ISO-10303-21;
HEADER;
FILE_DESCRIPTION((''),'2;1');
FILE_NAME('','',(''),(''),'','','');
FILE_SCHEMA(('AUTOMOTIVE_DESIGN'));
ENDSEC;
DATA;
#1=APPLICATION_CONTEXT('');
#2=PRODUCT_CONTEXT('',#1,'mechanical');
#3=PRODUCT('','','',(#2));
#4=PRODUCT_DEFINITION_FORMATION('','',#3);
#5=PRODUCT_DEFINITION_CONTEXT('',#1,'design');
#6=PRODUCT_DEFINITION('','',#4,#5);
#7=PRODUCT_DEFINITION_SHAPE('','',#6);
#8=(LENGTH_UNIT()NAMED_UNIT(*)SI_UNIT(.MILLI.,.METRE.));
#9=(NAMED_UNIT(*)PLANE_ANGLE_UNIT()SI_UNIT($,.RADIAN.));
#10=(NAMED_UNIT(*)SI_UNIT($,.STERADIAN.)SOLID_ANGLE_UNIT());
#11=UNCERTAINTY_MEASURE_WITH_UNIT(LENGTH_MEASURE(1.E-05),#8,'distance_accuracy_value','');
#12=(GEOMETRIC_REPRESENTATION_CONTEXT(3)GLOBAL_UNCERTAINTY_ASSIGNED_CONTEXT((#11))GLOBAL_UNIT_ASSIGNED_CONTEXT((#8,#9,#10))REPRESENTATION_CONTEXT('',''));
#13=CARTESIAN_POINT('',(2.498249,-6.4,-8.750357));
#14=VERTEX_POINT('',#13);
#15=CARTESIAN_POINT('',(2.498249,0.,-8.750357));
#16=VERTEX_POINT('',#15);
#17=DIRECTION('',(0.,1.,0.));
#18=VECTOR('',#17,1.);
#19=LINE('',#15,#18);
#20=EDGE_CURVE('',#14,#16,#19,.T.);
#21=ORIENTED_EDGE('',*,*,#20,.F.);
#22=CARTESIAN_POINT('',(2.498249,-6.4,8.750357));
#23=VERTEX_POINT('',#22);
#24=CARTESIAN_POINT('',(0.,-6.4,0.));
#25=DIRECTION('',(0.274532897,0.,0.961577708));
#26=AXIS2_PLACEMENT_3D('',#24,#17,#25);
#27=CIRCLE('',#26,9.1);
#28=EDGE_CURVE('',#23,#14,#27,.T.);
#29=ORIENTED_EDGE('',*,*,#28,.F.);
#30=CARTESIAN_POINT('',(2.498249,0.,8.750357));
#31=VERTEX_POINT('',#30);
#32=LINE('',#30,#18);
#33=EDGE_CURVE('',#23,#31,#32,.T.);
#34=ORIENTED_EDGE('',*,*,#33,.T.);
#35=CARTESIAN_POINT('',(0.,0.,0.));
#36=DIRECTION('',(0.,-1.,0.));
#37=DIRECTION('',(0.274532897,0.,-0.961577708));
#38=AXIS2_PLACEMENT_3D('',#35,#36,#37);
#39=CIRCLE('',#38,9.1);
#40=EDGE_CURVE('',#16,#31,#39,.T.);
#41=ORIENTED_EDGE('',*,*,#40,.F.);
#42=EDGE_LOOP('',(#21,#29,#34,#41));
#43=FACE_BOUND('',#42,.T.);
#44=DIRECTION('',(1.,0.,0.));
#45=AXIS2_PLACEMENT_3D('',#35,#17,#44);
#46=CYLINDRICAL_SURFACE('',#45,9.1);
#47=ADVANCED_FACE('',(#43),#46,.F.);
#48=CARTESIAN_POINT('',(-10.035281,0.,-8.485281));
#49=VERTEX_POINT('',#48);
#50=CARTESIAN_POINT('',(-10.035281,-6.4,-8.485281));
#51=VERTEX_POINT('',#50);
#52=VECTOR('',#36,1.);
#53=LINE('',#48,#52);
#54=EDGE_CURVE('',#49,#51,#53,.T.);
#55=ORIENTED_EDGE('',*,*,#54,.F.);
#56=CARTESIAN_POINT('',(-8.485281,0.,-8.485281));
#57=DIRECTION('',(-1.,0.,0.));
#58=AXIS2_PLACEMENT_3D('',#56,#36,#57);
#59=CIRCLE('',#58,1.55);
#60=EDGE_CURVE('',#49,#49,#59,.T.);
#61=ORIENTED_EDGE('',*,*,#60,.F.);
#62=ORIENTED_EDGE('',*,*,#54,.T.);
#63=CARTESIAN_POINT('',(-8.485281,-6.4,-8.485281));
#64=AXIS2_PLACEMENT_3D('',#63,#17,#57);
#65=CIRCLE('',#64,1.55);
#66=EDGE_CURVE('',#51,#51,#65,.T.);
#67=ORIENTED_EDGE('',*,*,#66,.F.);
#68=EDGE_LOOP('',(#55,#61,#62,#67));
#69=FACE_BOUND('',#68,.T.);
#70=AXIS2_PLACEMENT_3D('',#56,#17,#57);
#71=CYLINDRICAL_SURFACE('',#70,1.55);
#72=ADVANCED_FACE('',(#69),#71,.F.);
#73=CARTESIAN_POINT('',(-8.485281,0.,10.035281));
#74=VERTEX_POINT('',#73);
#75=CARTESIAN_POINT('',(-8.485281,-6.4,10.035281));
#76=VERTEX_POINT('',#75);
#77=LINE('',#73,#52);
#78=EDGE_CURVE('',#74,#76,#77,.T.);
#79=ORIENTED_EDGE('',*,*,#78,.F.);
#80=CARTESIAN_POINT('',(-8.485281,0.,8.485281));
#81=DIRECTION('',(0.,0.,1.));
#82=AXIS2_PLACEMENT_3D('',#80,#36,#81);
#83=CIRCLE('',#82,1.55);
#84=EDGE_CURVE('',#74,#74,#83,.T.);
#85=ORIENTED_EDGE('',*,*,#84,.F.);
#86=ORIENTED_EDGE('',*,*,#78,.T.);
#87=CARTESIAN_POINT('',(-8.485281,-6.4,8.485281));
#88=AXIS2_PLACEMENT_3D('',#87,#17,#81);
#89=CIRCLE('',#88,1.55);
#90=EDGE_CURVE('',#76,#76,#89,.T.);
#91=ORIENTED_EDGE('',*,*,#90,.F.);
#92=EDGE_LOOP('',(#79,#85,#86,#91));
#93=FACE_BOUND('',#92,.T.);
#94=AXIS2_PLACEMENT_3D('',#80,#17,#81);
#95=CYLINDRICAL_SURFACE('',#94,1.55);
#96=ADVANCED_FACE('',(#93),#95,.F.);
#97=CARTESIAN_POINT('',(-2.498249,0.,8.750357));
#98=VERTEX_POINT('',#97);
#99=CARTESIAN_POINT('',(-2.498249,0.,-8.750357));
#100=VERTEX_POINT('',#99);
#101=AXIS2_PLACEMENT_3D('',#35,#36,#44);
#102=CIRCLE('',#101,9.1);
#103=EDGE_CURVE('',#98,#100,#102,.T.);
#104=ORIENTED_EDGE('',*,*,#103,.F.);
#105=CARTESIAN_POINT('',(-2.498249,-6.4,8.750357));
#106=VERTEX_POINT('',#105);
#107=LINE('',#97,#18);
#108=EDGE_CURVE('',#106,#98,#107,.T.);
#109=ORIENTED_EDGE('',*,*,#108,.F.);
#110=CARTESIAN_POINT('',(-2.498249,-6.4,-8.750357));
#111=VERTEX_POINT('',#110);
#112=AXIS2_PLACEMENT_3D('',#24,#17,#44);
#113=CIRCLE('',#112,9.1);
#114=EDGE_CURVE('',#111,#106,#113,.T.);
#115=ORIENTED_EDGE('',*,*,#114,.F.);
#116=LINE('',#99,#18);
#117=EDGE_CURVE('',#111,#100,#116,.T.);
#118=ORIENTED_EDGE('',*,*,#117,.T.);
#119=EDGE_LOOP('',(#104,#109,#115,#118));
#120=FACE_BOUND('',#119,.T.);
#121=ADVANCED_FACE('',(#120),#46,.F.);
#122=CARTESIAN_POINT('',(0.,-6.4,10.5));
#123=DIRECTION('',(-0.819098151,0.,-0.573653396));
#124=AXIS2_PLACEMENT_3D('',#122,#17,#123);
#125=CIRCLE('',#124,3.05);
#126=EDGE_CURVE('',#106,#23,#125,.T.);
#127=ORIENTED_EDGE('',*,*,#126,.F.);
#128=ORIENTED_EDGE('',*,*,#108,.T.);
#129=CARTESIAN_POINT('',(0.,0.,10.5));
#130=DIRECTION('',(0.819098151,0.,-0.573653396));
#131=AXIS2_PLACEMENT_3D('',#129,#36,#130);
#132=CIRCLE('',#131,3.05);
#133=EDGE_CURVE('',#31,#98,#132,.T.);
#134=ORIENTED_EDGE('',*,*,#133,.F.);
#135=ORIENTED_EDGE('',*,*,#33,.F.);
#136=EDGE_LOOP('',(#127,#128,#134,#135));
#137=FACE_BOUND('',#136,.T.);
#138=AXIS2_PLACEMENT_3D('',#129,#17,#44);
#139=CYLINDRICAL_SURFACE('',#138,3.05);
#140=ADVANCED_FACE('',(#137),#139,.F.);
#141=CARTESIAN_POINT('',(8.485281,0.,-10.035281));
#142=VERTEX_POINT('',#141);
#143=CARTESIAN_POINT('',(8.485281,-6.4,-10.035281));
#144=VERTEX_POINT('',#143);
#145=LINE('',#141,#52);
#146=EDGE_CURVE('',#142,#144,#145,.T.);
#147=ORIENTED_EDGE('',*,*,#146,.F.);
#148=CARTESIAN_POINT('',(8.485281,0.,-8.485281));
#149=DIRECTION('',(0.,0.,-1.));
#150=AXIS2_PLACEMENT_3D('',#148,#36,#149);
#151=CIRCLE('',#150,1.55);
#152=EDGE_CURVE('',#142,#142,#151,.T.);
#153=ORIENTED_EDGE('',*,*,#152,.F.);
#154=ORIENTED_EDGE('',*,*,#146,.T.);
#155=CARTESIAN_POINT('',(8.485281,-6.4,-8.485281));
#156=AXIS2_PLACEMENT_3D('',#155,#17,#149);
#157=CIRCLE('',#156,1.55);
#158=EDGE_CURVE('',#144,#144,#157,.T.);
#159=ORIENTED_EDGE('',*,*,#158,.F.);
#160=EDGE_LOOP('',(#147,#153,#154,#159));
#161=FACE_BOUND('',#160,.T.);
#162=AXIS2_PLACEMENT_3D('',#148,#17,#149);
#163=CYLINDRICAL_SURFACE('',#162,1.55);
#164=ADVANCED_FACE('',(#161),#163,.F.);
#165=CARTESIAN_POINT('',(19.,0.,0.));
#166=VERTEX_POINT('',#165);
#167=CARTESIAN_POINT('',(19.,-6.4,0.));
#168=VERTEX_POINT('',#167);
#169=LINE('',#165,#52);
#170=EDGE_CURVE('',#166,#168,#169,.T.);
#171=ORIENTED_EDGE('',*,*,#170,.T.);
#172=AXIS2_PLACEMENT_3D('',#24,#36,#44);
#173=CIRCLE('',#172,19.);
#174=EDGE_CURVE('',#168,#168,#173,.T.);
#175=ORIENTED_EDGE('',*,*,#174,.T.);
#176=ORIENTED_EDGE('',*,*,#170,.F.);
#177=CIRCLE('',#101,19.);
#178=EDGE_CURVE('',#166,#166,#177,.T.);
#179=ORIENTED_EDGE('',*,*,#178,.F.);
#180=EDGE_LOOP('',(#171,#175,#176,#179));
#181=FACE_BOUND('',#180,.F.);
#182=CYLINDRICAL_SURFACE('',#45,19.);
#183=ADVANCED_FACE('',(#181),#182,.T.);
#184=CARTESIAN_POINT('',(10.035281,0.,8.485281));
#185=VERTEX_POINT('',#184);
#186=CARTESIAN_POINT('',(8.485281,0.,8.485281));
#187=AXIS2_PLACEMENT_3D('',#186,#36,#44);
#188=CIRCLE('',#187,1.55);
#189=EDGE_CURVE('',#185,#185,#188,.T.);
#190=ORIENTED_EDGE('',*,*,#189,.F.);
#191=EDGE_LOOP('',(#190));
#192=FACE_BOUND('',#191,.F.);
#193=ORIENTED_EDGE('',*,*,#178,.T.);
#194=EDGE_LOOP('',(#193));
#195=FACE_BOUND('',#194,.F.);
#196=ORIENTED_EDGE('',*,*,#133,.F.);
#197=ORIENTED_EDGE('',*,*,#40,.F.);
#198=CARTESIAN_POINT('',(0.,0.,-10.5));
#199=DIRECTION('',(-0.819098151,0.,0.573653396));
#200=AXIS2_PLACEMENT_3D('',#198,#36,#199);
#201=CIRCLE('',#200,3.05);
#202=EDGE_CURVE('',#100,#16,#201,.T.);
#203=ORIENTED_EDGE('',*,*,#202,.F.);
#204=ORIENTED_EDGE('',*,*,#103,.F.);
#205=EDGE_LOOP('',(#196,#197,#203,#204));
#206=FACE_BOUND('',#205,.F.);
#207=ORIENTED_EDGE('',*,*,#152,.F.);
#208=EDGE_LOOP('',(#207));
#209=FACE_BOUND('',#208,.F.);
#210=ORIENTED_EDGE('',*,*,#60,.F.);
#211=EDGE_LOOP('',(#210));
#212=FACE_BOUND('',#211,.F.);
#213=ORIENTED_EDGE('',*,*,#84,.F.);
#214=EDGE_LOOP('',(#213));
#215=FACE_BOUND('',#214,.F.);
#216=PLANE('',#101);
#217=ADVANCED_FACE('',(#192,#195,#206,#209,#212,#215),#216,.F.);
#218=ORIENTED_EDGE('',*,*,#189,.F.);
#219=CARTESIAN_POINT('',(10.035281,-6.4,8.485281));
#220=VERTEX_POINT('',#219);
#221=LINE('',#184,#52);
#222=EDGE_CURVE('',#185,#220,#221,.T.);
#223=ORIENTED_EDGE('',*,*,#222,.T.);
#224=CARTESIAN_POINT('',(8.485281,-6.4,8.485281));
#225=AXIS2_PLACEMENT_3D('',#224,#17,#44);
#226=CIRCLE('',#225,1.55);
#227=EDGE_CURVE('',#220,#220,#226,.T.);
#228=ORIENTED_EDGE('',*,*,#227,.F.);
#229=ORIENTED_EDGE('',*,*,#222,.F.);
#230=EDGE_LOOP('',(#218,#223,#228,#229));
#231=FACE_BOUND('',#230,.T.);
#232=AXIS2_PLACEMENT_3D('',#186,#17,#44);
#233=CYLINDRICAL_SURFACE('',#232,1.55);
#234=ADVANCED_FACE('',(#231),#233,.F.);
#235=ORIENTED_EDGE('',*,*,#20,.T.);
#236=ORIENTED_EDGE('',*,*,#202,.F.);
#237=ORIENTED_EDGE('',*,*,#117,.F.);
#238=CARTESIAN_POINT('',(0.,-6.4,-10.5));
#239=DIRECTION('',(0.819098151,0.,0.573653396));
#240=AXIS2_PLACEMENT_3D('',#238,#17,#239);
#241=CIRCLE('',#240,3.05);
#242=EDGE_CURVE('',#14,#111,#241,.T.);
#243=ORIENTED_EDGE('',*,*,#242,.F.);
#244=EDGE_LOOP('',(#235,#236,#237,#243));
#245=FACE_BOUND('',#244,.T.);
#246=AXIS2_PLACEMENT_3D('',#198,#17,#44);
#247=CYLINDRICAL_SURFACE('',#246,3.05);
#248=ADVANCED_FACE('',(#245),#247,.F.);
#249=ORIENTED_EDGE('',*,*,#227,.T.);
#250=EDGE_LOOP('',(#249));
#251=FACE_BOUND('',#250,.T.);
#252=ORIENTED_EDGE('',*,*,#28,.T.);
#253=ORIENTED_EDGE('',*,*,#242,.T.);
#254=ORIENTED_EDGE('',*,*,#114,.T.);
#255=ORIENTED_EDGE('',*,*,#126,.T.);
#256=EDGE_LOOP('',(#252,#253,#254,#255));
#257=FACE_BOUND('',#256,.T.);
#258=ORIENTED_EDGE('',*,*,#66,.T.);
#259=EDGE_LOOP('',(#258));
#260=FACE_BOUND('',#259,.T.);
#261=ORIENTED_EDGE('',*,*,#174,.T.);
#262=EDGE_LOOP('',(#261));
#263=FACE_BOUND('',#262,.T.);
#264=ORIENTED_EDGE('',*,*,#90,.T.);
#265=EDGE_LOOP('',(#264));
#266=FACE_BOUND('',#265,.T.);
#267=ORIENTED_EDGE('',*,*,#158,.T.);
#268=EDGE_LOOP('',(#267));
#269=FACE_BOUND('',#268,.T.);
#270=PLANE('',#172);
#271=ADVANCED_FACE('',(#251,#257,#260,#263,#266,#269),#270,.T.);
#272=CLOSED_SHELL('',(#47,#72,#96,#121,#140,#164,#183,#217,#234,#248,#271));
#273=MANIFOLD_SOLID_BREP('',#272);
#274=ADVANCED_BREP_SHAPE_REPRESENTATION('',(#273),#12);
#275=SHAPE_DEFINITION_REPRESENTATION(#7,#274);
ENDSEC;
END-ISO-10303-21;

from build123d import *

# Parameters (mm, degrees)
F0_R            = 19
F1_DEPTH        = 6.4
F2_R            = 1.55
F3_DEPTH        = 25.4
F3_COPIES_COUNT = 4
F4_R            = 9.1
F5_DEPTH        = 6.401
F6_R            = 3.05
F7_DEPTH        = 6.401


# Not quite as in the source:
# - a pattern or mirror of a feature is missing from the dataset's text; its kind, count and spacing are read off the source's solid


with BuildPart() as f1:
    # F0 (on Front) → F1 (new body)
    with BuildSketch(Plane.XZ):
        Circle(F0_R)
    extrude(amount=F1_DEPTH)

    # F2 (on Front) → F3 (cut)
    with BuildSketch(Plane.XZ):
        with Locations((8.4852813742, 8.4852813742)):
            Circle(F2_R)
    f3 = extrude(amount=F3_DEPTH, mode=Mode.SUBTRACT)

    # F3_copies: F3 ×4 about axis
    f3_copies_axis = Axis((0, 0, 0), (0, 1, 0))
    for i in range(1, F3_COPIES_COUNT):
        add(f3.rotate(f3_copies_axis, i * 360 / F3_COPIES_COUNT), mode=Mode.SUBTRACT)

    # F4 (on Front) → F5 (cut, through all)
    with BuildSketch(Plane.XZ):
        Circle(F4_R)
    extrude(amount=F5_DEPTH, mode=Mode.SUBTRACT)

    # F6 (on Front) → F7 (cut, through all)
    with BuildSketch(Plane.XZ):
        with Locations((0, 10.5)):
            Circle(F6_R)
        with Locations((0, -10.5)):
            Circle(F6_R)
    extrude(amount=F7_DEPTH, mode=Mode.SUBTRACT)


solid = f1.part
